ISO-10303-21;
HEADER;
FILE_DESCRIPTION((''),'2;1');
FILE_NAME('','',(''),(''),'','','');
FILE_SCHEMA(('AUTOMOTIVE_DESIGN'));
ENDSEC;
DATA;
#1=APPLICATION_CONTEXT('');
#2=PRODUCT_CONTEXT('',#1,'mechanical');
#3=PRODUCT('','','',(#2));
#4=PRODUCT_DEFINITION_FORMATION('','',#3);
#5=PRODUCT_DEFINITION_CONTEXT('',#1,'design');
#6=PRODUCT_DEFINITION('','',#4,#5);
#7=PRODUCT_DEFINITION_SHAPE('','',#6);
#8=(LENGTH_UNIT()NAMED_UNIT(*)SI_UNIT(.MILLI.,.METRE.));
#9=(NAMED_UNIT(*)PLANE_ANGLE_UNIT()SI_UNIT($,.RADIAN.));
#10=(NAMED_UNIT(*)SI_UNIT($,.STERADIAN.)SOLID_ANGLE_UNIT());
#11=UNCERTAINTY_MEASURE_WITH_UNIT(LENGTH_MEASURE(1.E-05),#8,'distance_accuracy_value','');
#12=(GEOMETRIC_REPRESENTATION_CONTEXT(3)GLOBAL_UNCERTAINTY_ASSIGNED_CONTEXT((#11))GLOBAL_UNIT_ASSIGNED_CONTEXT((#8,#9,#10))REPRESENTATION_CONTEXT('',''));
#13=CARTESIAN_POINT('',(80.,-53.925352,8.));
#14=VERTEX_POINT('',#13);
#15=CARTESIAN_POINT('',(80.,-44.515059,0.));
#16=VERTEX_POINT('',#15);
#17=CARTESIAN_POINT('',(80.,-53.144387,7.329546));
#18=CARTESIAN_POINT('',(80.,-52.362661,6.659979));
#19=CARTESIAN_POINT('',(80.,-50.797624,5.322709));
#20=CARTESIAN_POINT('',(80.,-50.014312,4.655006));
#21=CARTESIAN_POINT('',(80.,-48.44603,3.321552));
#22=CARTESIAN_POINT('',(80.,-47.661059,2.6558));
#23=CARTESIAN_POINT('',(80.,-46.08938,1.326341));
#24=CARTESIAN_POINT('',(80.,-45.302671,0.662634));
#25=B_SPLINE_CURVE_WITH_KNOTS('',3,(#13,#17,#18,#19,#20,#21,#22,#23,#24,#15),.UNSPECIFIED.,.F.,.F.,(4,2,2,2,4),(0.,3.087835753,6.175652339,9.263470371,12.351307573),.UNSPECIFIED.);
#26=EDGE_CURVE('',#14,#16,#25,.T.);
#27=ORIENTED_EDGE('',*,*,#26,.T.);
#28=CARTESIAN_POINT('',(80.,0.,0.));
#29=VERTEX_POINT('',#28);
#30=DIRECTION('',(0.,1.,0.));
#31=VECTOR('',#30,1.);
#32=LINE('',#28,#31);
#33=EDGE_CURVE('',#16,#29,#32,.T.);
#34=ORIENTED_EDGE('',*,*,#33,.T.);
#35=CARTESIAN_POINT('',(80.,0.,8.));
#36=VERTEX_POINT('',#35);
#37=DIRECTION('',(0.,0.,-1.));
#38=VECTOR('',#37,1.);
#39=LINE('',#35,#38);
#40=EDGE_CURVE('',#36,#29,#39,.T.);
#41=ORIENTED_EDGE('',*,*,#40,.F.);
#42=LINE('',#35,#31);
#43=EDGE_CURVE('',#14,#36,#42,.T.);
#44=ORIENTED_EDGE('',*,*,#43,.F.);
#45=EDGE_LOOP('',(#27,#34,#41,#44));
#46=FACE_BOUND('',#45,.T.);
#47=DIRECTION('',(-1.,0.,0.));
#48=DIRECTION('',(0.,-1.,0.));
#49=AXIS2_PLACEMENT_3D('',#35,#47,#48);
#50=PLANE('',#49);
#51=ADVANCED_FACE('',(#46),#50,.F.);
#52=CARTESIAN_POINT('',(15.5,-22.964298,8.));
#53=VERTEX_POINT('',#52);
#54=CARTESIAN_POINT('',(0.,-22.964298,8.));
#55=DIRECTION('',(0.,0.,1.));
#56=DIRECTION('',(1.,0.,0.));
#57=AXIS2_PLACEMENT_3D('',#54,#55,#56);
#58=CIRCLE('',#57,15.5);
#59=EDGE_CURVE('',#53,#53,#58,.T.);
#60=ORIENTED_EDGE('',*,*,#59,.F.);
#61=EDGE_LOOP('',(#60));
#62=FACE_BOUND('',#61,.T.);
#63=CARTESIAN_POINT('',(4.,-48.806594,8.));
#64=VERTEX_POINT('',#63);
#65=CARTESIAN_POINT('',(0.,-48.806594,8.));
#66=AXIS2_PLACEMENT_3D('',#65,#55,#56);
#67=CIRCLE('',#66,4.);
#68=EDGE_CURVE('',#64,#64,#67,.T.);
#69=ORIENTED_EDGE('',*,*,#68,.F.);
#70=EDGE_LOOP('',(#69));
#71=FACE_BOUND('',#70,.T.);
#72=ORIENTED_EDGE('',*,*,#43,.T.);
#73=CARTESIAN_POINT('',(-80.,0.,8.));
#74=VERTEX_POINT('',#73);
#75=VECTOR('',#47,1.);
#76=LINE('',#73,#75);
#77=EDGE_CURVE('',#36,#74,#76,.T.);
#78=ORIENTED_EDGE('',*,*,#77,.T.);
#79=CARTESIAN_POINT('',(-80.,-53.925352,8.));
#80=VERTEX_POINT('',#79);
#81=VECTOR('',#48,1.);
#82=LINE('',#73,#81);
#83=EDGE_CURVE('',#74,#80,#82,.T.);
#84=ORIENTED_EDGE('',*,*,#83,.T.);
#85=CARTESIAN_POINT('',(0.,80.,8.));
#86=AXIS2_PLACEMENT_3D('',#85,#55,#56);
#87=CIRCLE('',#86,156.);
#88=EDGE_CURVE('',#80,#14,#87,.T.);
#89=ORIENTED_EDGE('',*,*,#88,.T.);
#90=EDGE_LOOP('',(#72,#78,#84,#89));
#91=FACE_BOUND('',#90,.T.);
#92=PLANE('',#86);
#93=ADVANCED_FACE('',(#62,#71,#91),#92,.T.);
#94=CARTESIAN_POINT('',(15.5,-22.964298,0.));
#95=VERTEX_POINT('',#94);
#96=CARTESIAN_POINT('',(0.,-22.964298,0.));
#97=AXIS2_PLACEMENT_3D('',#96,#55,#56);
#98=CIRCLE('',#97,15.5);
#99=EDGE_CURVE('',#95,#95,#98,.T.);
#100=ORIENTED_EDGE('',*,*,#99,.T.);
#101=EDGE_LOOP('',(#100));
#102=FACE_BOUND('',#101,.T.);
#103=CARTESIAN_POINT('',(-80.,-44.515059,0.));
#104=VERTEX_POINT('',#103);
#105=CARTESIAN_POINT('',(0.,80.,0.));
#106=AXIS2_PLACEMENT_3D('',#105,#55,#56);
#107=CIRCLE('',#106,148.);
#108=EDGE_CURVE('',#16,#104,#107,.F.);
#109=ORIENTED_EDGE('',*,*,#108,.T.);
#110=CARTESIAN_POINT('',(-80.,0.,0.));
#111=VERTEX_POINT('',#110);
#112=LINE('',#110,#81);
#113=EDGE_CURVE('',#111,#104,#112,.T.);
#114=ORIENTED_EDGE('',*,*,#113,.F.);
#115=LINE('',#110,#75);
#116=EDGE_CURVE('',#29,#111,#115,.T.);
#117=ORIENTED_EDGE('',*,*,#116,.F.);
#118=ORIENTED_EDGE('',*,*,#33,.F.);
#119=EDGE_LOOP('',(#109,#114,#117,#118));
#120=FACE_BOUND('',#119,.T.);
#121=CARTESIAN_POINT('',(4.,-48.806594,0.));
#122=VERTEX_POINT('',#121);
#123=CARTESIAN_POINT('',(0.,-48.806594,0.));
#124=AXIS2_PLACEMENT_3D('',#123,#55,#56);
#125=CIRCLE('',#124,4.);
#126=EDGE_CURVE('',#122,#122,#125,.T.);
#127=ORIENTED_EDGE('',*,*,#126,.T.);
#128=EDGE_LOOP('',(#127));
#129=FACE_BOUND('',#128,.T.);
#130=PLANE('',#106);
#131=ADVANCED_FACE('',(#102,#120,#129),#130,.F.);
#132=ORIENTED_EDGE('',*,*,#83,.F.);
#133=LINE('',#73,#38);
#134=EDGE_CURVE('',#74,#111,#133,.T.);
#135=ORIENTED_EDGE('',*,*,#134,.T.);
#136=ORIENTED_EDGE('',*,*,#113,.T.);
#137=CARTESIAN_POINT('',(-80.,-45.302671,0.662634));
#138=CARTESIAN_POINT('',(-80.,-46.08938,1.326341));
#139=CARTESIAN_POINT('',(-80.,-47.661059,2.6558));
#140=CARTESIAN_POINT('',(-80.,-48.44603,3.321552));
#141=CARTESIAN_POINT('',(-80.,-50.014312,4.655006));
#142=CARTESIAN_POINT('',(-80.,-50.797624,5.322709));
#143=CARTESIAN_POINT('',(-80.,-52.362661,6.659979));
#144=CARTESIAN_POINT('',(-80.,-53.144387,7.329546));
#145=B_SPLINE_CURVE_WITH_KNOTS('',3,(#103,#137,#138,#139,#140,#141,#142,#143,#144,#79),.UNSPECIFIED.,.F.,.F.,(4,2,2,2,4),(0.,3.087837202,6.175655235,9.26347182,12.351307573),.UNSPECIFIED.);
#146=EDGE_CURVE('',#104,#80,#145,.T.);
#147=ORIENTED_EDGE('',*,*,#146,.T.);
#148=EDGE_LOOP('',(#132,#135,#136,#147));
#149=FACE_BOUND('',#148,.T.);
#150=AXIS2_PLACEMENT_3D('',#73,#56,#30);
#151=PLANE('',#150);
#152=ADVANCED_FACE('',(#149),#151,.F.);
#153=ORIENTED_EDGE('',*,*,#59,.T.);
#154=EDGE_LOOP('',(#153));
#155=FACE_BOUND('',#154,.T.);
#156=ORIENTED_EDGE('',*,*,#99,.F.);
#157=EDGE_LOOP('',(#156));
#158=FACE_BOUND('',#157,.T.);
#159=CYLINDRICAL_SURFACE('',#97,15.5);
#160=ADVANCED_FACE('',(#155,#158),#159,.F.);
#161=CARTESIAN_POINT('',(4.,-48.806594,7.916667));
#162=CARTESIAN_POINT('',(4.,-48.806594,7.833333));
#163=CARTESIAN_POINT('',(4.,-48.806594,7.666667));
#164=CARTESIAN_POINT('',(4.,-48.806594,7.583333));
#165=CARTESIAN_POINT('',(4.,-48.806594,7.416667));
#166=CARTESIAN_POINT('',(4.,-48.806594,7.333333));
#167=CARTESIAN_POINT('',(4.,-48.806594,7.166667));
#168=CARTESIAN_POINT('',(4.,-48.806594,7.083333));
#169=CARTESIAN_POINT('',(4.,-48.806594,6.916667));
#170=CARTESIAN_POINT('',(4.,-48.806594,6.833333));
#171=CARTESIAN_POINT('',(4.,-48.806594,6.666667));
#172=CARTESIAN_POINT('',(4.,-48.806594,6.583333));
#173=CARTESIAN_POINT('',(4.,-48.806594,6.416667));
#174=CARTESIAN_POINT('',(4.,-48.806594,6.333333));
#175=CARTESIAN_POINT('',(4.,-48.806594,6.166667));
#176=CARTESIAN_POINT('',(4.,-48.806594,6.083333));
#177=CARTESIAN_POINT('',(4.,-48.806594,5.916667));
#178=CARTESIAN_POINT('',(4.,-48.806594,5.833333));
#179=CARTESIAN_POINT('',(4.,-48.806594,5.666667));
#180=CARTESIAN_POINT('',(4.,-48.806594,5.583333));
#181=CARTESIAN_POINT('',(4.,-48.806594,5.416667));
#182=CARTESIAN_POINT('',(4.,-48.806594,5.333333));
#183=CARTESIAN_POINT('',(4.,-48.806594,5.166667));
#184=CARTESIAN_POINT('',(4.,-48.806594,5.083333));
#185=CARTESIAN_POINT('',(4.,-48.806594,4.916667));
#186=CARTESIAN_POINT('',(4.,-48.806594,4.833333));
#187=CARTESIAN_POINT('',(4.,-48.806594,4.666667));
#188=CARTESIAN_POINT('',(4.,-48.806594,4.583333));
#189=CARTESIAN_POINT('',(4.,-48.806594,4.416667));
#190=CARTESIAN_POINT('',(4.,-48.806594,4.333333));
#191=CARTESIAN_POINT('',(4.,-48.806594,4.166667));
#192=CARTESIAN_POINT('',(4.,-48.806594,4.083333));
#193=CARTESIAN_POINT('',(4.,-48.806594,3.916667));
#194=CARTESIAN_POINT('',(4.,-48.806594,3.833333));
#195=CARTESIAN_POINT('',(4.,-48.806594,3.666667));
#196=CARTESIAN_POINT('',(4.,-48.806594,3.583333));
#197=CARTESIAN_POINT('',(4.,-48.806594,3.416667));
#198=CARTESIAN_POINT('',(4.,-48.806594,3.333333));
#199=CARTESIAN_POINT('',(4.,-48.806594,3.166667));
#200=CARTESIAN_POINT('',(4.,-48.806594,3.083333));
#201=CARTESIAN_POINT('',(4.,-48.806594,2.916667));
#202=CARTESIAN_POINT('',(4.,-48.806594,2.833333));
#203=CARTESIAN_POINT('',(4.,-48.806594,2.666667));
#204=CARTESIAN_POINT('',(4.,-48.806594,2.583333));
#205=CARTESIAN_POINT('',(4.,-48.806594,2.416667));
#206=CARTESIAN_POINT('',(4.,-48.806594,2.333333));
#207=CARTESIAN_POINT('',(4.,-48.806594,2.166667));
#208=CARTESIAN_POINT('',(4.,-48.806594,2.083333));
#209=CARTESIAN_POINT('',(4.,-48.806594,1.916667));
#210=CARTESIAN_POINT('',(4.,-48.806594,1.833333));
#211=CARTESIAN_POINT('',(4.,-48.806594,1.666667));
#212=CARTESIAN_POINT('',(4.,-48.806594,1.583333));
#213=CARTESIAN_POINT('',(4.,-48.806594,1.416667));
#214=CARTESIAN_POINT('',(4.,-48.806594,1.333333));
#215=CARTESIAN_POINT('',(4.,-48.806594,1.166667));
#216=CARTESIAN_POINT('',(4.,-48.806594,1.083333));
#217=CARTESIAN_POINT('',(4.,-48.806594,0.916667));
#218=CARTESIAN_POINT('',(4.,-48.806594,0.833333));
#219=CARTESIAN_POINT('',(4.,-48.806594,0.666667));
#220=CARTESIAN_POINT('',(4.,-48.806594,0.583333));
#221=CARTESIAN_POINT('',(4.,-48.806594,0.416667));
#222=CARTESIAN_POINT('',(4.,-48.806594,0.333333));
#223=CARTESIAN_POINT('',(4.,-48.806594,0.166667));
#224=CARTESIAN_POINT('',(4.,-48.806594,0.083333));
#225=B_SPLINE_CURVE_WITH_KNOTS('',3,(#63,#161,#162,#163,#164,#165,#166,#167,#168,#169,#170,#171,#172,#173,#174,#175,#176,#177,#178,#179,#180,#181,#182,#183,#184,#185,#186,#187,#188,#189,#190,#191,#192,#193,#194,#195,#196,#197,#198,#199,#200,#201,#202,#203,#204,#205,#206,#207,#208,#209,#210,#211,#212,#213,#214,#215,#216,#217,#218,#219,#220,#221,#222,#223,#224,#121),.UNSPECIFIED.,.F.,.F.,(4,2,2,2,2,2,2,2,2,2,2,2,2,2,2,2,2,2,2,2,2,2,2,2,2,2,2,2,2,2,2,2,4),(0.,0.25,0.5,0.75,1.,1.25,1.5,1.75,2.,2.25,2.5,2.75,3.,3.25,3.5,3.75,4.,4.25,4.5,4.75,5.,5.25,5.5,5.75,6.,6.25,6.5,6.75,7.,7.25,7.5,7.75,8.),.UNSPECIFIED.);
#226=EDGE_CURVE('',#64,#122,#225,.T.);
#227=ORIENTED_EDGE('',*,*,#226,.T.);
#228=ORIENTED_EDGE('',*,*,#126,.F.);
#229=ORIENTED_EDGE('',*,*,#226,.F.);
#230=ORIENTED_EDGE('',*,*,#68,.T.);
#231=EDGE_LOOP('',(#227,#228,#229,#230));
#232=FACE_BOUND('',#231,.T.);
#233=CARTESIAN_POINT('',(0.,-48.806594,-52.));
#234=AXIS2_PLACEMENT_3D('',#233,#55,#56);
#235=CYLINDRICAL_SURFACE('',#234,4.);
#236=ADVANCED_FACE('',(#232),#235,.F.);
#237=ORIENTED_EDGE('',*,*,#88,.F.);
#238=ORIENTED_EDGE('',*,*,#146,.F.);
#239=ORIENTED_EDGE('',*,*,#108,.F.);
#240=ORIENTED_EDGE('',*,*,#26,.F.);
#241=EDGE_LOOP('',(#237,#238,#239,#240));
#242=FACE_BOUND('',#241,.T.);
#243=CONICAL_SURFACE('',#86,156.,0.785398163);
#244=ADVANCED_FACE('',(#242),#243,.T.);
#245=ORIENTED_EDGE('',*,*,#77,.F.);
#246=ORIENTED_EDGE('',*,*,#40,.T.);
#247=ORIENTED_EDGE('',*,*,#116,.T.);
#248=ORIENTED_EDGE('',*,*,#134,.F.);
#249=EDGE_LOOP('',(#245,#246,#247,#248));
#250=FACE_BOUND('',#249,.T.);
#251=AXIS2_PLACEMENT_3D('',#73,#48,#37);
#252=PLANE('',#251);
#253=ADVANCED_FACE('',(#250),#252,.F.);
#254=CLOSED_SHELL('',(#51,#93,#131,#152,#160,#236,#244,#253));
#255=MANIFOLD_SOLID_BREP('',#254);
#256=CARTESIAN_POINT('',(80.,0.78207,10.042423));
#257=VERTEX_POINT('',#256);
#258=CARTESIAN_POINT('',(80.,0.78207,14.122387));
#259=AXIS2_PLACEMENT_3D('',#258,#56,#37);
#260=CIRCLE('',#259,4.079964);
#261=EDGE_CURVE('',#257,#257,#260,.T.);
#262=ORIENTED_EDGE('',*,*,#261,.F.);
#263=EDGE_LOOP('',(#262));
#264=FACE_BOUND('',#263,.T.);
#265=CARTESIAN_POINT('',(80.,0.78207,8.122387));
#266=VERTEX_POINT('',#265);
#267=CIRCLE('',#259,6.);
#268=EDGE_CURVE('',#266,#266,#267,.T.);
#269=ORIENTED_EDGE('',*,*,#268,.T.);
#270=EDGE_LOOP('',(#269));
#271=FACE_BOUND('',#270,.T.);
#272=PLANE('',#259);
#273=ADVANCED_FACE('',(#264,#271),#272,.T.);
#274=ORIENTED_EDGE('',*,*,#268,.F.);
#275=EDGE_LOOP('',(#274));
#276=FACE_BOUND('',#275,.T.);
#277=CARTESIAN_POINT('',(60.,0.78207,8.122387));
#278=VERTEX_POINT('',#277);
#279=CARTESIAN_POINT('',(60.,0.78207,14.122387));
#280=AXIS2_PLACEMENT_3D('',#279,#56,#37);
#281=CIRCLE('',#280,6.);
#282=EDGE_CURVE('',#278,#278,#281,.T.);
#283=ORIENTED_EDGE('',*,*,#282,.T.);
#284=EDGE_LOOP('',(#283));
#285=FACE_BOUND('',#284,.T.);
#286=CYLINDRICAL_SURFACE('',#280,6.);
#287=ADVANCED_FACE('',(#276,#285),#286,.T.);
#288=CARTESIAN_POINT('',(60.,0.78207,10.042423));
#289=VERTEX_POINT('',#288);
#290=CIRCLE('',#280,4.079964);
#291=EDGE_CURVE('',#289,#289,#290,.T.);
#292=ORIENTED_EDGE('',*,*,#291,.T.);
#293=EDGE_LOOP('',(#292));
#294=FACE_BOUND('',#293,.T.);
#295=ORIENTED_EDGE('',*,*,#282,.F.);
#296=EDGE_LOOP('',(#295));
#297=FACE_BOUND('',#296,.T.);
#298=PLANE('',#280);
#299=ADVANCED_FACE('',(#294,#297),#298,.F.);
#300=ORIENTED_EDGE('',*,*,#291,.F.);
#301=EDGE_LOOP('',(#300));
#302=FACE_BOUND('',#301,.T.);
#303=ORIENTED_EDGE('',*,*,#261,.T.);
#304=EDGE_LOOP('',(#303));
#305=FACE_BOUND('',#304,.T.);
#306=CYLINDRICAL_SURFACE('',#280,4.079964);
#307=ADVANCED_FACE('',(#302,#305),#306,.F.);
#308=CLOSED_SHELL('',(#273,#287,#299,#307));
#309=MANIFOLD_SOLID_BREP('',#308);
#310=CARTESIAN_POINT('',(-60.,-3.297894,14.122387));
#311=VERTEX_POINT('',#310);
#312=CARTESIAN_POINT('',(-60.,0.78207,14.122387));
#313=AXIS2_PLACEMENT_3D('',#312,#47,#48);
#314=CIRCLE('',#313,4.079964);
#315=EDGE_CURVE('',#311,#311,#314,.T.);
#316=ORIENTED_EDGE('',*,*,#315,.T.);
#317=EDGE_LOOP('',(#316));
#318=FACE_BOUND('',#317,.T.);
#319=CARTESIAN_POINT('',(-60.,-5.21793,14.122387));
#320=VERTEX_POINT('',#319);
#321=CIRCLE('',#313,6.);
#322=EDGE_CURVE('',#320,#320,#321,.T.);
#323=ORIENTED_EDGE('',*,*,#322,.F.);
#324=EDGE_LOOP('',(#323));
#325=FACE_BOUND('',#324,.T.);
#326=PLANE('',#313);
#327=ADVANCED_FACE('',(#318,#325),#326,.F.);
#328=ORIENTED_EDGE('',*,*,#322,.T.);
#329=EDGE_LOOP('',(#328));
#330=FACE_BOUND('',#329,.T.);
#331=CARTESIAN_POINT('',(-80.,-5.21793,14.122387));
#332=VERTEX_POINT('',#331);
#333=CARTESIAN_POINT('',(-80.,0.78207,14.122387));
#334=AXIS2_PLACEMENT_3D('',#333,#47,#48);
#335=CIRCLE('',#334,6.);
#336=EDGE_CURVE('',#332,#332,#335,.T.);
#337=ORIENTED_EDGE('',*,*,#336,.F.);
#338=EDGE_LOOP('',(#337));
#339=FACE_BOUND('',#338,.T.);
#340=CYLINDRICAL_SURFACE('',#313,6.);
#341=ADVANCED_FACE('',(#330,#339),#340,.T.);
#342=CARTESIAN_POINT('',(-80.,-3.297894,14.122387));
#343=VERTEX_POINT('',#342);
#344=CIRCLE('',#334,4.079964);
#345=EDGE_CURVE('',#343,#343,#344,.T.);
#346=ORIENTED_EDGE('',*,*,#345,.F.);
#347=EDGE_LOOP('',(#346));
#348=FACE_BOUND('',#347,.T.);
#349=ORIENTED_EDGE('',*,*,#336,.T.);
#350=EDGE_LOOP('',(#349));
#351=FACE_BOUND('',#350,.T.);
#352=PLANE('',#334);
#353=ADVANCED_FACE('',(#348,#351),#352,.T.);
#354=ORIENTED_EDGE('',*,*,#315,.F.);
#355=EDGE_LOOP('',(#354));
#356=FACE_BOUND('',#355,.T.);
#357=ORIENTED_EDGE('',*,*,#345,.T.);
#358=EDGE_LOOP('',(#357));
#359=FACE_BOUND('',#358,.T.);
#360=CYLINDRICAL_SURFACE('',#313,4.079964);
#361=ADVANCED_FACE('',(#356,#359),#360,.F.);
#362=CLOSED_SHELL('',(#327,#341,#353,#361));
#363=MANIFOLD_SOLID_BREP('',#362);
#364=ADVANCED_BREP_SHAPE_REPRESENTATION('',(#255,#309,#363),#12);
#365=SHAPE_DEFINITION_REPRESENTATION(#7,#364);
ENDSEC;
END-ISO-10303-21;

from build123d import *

# Parameters (mm, degrees)
BOSS_EXTRUDE1_DEPTH = 8
SKETCH2_R           = 15.5
CUT_EXTRUDE1_DEPTH  = 8
CHAMFER1_SIZE       = 8
SKETCH3_R           = 4
CUT_EXTRUDE2_DEPTH  = 60
SKETCH4_R           = 6
SKETCH4_R_2         = 4.079964081
BOSS_EXTRUDE2_DEPTH = 20
SKETCH5_R           = 6
SKETCH5_R_2         = 4.079964081
BOSS_EXTRUDE3_DEPTH = 20


with BuildPart() as part:
    # Sketch1 → Boss-Extrude1 (new body)
    with BuildSketch(Plane.XY):
        with BuildLine():
            Line((-80, 0), (-80, -53.925352342))
            ThreePointArc((-80, -53.925352342), (0, -76), (80, -53.925352342))
            Line((80, -53.925352342), (80, 0))
            Line((80, 0), (-80, 0))
        make_face()
    extrude(amount=BOSS_EXTRUDE1_DEPTH)

    # Sketch2 → Cut-Extrude1 (cut)
    with BuildSketch(Plane.XY.offset(8)):
        with Locations((0, -22.964297533)):
            Circle(SKETCH2_R)
    extrude(amount=-CUT_EXTRUDE1_DEPTH, mode=Mode.SUBTRACT)

    # Chamfer1
    chamfer1_edges = [part.edges().sort_by_distance(p)[0] for p in [
        (0, -76, 0),
    ]]
    chamfer(chamfer1_edges, length=CHAMFER1_SIZE - 0.0001)  # a hair under: the kernel refuses the full size

    # Sketch3 → Cut-Extrude2 (cut)
    with BuildSketch(Plane.XY.offset(8)):
        with Locations((0, -48.806594288)):
            Circle(SKETCH3_R)
    extrude(amount=-CUT_EXTRUDE2_DEPTH, mode=Mode.SUBTRACT)


with BuildPart() as body_2:
    # Sketch4 → Boss-Extrude2 (new body)
    with BuildSketch(Plane.ZY.offset(80)):
        with Locations(Location((14.122386973, 0.782069774, 0), (0, 0, 270))):
            Circle(SKETCH4_R)
        with Locations(Location((14.122386973, 0.782069774, 0), (0, 0, 270))):
            Circle(SKETCH4_R_2, mode=Mode.SUBTRACT)
    extrude(amount=-BOSS_EXTRUDE2_DEPTH)


with BuildPart() as body_3:
    # Sketch5 → Boss-Extrude3 (new body)
    with BuildSketch(Plane(origin=(80, 0, 0), x_dir=(0, 0, -1), z_dir=(1, 0, 0))):
        with Locations((-14.122386973, 0.782069774)):
            Circle(SKETCH5_R)
        with Locations((-14.122386973, 0.782069774)):
            Circle(SKETCH5_R_2, mode=Mode.SUBTRACT)
    extrude(amount=-BOSS_EXTRUDE3_DEPTH)


solid = Compound([part.part, body_2.part, body_3.part])
